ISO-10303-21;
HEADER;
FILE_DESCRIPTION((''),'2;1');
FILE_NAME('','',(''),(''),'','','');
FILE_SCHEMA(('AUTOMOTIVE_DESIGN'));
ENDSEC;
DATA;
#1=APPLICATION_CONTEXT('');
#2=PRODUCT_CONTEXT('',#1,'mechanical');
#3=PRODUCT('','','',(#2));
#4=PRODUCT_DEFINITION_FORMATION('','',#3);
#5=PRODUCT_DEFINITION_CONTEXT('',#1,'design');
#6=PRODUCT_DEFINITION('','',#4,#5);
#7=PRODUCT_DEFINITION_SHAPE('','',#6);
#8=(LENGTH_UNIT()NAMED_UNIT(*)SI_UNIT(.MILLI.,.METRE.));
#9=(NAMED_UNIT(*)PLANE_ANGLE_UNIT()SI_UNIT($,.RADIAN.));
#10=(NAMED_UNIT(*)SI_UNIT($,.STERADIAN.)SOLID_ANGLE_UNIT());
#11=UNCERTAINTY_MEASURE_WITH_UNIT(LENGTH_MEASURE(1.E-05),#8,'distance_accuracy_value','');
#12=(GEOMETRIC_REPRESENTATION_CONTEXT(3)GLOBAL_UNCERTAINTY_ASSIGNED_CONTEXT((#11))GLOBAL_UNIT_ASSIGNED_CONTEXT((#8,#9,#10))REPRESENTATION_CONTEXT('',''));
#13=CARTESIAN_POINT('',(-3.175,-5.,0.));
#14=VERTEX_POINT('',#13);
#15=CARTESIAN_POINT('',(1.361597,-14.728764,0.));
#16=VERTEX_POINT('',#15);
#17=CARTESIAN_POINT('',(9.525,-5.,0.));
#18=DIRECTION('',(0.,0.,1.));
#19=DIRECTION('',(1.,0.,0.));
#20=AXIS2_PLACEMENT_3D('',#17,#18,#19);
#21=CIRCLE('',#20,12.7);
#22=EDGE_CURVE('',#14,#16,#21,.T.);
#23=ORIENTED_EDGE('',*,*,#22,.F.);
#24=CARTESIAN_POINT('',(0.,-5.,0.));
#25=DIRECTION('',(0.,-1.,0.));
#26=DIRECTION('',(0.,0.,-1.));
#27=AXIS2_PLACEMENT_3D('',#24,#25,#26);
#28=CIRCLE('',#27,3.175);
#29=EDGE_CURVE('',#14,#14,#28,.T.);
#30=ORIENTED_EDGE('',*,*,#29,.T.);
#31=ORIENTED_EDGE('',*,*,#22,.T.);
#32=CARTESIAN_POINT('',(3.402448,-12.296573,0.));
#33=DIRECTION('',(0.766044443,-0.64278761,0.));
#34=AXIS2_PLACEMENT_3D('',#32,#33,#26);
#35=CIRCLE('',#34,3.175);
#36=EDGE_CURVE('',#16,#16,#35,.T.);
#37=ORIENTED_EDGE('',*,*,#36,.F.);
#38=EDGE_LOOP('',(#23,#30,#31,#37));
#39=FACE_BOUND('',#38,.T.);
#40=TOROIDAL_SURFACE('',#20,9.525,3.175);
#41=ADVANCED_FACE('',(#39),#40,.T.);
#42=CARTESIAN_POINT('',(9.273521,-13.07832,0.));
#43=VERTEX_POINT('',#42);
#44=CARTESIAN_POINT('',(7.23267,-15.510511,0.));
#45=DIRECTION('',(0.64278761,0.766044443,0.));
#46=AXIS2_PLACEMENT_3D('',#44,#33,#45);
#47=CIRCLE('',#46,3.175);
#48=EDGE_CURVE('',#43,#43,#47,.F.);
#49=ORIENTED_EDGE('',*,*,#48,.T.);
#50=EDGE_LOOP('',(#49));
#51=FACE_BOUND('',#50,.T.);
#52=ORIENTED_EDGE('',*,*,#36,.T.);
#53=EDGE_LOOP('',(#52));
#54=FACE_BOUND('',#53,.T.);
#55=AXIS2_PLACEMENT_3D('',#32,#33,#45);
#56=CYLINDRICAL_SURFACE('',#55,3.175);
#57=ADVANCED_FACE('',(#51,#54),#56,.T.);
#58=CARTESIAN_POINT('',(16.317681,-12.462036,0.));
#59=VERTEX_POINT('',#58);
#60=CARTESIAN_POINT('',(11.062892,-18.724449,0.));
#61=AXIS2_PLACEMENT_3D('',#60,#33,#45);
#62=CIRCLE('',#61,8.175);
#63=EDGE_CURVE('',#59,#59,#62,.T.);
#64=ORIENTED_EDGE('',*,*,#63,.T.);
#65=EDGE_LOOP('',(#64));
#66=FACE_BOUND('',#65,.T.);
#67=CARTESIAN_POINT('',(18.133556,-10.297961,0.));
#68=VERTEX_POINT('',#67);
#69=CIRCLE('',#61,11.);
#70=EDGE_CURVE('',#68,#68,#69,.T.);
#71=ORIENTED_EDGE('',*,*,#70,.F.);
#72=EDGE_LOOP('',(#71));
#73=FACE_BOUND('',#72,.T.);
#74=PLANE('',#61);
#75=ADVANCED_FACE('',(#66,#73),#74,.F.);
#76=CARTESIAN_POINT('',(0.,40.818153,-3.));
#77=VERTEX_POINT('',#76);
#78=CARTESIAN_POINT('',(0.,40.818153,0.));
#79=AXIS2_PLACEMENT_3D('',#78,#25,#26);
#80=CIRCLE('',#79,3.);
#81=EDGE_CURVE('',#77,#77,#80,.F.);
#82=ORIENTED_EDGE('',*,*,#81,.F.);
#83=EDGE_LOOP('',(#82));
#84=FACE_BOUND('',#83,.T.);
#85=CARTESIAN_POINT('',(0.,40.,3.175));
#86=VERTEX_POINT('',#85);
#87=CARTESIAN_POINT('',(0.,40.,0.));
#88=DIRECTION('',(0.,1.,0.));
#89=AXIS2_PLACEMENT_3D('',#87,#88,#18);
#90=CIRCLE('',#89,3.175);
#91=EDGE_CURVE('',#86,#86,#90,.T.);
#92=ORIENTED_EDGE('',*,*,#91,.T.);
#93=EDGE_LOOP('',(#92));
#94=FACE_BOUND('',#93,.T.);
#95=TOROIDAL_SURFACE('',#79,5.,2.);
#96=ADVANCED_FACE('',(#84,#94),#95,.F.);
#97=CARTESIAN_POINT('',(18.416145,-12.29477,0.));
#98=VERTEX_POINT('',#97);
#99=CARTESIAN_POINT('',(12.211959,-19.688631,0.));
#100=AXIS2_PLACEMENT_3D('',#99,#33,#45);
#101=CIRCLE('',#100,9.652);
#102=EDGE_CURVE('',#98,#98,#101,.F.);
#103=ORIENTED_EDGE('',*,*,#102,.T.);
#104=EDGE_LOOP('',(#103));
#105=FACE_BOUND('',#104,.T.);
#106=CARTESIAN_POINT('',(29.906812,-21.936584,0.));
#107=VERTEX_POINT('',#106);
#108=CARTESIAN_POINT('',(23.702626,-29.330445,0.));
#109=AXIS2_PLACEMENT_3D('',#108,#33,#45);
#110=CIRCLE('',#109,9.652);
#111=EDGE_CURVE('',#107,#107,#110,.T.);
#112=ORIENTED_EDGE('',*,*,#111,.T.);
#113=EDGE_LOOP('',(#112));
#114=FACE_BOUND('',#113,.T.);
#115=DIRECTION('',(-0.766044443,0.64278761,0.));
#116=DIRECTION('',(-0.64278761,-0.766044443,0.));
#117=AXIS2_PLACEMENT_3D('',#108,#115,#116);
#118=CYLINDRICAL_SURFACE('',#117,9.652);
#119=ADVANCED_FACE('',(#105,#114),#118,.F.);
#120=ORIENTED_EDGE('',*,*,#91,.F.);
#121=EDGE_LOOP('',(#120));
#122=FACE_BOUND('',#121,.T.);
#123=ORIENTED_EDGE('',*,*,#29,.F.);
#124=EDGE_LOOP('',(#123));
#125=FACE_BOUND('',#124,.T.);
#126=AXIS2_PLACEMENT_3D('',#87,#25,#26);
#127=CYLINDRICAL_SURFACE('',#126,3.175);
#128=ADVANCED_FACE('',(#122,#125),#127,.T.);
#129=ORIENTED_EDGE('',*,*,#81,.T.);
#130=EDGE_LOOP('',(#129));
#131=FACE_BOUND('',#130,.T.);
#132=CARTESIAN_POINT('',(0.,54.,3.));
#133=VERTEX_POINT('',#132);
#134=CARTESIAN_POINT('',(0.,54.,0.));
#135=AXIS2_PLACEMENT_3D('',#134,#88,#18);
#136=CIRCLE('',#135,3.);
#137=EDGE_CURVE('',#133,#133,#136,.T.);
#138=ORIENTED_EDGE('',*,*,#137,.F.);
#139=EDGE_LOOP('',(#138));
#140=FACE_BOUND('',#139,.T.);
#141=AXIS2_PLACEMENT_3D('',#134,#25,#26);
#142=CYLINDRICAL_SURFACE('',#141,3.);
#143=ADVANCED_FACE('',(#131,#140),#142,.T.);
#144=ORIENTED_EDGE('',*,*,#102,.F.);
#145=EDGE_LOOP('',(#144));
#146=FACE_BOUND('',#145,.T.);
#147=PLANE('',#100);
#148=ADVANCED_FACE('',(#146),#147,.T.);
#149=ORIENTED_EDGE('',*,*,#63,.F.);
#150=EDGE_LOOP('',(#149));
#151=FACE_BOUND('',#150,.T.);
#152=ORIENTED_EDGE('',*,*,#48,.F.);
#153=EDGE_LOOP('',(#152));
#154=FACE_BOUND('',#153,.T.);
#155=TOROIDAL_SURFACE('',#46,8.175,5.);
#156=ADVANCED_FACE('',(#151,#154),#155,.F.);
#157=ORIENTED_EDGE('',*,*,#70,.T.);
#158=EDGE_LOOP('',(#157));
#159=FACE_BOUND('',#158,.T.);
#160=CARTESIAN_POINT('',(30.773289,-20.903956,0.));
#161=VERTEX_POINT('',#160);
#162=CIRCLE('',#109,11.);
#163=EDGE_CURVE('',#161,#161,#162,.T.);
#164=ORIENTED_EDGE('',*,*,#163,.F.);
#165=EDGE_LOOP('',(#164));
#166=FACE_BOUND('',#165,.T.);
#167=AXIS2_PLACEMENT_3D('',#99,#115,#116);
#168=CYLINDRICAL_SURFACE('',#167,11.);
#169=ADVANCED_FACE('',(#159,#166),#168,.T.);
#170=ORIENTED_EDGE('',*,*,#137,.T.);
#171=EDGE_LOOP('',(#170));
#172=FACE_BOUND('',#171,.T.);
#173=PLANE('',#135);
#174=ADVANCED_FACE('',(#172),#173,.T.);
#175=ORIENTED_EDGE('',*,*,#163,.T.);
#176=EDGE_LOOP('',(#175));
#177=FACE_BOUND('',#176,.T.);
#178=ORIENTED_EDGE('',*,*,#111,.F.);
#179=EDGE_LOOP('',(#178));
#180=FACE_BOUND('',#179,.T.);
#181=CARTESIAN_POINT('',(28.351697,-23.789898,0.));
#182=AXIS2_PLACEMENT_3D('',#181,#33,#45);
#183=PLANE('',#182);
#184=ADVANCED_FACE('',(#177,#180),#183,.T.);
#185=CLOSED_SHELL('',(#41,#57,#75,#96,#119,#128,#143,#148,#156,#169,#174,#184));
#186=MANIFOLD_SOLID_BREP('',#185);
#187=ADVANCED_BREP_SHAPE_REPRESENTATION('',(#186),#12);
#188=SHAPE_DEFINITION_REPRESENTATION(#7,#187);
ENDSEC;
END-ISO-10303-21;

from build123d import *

# Parameters (mm, degrees)
SKETCH1_R           = 3.175
BOSS_EXTRUDE1_DEPTH = 40
SKETCH2_R           = 3.175
SKETCH5_R           = 11
BOSS_EXTRUDE2_DEPTH = 1.5
SKETCH4_R           = 11
SKETCH4_R_2         = 9.652
BOSS_EXTRUDE3_DEPTH = 15
SKETCH6_R           = 3
BOSS_EXTRUDE4_DEPTH = 14
FILLET1_R           = 2
FILLET2_R           = 5


with BuildPart() as part:
    # Sketch1 → Boss-Extrude1 (new body)
    with BuildSketch(Plane(origin=(0, 0, 0), x_dir=(1, 0, 0), z_dir=(0, 1, 0))):
        with Locations(Location((0, 0, 0), (0, 0, 270))):
            Circle(SKETCH1_R)
    extrude(amount=BOSS_EXTRUDE1_DEPTH)

    # Sweep1: sweep along a path in Sketch3
    with BuildLine(Plane.XY) as sweep1_path:
        Line((0, 0), (0, -5))
        ThreePointArc((0, -5), (0.892418328, -9.025438943), (3.402448018, -12.296573321))
        Line((3.402448018, -12.296573321), (11.062892449, -18.724449418))
    # Sketch2 → Sweep1 (sweep)
    with BuildSketch(Plane.XZ):
        Circle(SKETCH2_R)
    sweep(path=sweep1_path.line)

    # Sketch5 → Boss-Extrude2 (add)
    with BuildSketch(Plane(origin=(15.71196326, -13.183902576, 0), x_dir=(0, 0, -1), z_dir=(0.7660444431189796, -0.6427876096865375, 0))):
        with Locations(Location((0, -7.232670233, 0), (0, 0, 90))):
            Circle(SKETCH5_R)
    extrude(amount=BOSS_EXTRUDE2_DEPTH)

    # Sketch4 → Boss-Extrude3 (add)
    with BuildSketch(Plane(origin=(16.861029925, -14.148083991, 0), x_dir=(0, 0, -1), z_dir=(0.7660444431189796, -0.6427876096865375, 0))):
        with Locations(Location((0, -7.232670233, 0), (0, 0, 90))):
            Circle(SKETCH4_R)
        with Locations(Location((0, -7.232670233, 0), (0, 0, 90))):
            Circle(SKETCH4_R_2, mode=Mode.SUBTRACT)
    extrude(amount=BOSS_EXTRUDE3_DEPTH)

    # Sketch6 → Boss-Extrude4 (add)
    with BuildSketch(Plane(origin=(0, 40, 0), x_dir=(1, 0, 0), z_dir=(0, 1, 0))):
        with Locations(Location((0, 0, 0), (0, 0, 270))):
            Circle(SKETCH6_R)
    extrude(amount=BOSS_EXTRUDE4_DEPTH)

    # Fillet1
    # the kernel refuses this fillet: 2 mm, written as the material it adds along each edge
    with BuildSketch(Plane(origin=(0, 40, 0), x_dir=(0, 0, 1), z_dir=(-1, 0, 0))) as fillet1_piece_1:
        with BuildLine():
            CenterArc((5, 0.818153409), FILLET1_R, 180, 24.146847997)
            Line((3, 0.818153409), (2.96, 0.818153409))
            Line((2.96, 0.818153409), (2.96, 0))
            Line((2.96, 0), (3, -0.04))
            ThreePointArc((3, -0.04), (3.0875, -0.04), (3.1385, -0.016363068))
            Line((3.1385, -0.016363068), (3.175, 0))
        make_face()
    revolve(axis=Axis((0, 40, 0), (0, 1, 0)))

    # Fillet2
    fillet2_edges = [part.edges().sort_by_distance(p)[0] for p in [
        (9.022041788, -21.156640524, 0),
    ]]
    fillet(fillet2_edges, radius=FILLET2_R)


solid = part.part
